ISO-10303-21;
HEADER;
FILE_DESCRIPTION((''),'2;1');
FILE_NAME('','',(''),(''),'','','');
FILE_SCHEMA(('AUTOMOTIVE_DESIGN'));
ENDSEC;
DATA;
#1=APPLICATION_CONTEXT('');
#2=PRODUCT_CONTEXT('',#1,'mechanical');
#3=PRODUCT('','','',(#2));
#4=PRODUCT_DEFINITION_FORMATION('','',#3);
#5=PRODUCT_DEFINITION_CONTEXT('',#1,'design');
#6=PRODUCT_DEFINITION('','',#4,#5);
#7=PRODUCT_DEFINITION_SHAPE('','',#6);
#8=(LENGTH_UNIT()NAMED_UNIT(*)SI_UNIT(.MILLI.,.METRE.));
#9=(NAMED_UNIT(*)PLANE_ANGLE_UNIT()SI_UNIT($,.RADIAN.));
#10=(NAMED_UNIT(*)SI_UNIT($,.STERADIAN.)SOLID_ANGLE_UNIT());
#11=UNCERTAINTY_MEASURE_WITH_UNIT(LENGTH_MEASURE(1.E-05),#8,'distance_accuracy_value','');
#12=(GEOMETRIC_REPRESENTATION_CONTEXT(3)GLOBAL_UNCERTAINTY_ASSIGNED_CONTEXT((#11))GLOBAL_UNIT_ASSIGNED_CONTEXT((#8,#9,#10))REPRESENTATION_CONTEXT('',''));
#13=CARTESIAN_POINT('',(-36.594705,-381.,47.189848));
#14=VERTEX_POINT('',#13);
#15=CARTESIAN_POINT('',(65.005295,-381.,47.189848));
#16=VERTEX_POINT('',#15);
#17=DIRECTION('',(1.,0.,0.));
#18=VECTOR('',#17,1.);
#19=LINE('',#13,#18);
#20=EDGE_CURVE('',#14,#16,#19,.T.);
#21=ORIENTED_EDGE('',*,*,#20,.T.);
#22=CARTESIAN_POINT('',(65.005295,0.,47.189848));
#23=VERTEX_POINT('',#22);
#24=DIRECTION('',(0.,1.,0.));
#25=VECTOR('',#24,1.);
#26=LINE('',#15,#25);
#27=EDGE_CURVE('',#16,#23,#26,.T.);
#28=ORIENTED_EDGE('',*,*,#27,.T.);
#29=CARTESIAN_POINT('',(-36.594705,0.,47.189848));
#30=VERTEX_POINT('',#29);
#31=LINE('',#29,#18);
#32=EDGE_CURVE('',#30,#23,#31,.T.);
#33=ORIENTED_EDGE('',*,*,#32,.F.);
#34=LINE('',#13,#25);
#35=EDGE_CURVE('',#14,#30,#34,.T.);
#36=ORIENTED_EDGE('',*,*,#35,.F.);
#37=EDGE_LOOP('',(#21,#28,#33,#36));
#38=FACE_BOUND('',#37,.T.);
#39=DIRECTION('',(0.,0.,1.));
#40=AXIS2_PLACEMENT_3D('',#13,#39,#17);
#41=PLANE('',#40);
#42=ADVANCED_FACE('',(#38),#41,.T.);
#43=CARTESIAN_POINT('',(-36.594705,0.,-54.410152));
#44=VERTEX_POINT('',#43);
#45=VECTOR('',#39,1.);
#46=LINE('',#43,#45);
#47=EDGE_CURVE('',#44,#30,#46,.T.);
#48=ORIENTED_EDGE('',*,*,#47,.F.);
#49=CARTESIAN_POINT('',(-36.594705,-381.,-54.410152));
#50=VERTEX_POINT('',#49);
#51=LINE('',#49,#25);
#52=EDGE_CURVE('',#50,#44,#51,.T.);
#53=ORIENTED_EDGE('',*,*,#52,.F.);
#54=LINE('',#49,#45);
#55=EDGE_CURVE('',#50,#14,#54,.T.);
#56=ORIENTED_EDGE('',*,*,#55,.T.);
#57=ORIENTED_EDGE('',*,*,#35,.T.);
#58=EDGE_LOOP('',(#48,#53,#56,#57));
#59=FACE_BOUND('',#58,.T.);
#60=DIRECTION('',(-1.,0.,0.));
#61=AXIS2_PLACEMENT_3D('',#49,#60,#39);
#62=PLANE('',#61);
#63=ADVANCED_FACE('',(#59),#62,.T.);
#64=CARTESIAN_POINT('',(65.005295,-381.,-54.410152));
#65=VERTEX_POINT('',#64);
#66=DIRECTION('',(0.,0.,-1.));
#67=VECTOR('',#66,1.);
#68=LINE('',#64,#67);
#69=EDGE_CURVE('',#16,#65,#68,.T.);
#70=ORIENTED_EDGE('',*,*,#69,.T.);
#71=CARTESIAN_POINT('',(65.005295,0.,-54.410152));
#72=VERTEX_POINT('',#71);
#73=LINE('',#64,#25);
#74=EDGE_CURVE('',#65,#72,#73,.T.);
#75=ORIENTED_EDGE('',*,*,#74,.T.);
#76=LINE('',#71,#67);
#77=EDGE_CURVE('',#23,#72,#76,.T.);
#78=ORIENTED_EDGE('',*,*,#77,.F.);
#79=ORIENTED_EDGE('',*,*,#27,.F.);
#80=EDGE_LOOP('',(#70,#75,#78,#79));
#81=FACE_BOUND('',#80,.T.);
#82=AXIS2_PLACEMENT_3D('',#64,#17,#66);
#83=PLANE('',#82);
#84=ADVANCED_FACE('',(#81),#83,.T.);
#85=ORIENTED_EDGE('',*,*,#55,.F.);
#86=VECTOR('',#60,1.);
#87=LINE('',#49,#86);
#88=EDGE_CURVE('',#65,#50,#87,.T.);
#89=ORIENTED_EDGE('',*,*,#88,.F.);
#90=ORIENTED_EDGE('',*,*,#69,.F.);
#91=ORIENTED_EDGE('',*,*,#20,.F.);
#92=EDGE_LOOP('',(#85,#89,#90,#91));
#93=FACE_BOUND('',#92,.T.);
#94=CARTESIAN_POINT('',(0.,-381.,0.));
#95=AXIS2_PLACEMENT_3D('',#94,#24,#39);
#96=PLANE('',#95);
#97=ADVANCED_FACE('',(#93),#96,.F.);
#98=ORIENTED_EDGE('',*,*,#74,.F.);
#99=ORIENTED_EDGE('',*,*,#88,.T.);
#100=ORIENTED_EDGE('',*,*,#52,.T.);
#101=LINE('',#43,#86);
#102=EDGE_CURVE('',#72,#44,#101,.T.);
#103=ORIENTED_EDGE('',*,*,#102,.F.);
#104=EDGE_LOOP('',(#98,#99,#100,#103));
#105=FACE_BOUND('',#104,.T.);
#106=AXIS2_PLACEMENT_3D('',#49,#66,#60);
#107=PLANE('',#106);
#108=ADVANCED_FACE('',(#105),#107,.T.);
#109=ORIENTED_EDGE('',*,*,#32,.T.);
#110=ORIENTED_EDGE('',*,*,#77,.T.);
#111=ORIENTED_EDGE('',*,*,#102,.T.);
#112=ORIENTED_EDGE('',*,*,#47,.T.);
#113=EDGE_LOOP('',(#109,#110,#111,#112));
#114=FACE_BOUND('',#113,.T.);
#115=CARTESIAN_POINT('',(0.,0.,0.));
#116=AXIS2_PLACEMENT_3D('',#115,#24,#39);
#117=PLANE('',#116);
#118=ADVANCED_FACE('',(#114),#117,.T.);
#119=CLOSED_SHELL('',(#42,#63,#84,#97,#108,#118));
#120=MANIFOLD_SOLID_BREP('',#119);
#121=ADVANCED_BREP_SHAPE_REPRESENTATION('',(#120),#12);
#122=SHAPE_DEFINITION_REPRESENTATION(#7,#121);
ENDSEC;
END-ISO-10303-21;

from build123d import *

# Parameters (mm, degrees)
SKETCH1_W           = 101.6
SKETCH1_H           = 101.6
BOSS_EXTRUDE1_DEPTH = 381


with BuildPart() as part:
    # Sketch1 → Boss-Extrude1 (new body)
    with BuildSketch(Plane(origin=(0, 0, 0), x_dir=(1, 0, 0), z_dir=(0, 1, 0))):
        with Locations((14.205295171, 3.610152284)):
            Rectangle(SKETCH1_W, SKETCH1_H)
    extrude(amount=-BOSS_EXTRUDE1_DEPTH)


solid = part.part
